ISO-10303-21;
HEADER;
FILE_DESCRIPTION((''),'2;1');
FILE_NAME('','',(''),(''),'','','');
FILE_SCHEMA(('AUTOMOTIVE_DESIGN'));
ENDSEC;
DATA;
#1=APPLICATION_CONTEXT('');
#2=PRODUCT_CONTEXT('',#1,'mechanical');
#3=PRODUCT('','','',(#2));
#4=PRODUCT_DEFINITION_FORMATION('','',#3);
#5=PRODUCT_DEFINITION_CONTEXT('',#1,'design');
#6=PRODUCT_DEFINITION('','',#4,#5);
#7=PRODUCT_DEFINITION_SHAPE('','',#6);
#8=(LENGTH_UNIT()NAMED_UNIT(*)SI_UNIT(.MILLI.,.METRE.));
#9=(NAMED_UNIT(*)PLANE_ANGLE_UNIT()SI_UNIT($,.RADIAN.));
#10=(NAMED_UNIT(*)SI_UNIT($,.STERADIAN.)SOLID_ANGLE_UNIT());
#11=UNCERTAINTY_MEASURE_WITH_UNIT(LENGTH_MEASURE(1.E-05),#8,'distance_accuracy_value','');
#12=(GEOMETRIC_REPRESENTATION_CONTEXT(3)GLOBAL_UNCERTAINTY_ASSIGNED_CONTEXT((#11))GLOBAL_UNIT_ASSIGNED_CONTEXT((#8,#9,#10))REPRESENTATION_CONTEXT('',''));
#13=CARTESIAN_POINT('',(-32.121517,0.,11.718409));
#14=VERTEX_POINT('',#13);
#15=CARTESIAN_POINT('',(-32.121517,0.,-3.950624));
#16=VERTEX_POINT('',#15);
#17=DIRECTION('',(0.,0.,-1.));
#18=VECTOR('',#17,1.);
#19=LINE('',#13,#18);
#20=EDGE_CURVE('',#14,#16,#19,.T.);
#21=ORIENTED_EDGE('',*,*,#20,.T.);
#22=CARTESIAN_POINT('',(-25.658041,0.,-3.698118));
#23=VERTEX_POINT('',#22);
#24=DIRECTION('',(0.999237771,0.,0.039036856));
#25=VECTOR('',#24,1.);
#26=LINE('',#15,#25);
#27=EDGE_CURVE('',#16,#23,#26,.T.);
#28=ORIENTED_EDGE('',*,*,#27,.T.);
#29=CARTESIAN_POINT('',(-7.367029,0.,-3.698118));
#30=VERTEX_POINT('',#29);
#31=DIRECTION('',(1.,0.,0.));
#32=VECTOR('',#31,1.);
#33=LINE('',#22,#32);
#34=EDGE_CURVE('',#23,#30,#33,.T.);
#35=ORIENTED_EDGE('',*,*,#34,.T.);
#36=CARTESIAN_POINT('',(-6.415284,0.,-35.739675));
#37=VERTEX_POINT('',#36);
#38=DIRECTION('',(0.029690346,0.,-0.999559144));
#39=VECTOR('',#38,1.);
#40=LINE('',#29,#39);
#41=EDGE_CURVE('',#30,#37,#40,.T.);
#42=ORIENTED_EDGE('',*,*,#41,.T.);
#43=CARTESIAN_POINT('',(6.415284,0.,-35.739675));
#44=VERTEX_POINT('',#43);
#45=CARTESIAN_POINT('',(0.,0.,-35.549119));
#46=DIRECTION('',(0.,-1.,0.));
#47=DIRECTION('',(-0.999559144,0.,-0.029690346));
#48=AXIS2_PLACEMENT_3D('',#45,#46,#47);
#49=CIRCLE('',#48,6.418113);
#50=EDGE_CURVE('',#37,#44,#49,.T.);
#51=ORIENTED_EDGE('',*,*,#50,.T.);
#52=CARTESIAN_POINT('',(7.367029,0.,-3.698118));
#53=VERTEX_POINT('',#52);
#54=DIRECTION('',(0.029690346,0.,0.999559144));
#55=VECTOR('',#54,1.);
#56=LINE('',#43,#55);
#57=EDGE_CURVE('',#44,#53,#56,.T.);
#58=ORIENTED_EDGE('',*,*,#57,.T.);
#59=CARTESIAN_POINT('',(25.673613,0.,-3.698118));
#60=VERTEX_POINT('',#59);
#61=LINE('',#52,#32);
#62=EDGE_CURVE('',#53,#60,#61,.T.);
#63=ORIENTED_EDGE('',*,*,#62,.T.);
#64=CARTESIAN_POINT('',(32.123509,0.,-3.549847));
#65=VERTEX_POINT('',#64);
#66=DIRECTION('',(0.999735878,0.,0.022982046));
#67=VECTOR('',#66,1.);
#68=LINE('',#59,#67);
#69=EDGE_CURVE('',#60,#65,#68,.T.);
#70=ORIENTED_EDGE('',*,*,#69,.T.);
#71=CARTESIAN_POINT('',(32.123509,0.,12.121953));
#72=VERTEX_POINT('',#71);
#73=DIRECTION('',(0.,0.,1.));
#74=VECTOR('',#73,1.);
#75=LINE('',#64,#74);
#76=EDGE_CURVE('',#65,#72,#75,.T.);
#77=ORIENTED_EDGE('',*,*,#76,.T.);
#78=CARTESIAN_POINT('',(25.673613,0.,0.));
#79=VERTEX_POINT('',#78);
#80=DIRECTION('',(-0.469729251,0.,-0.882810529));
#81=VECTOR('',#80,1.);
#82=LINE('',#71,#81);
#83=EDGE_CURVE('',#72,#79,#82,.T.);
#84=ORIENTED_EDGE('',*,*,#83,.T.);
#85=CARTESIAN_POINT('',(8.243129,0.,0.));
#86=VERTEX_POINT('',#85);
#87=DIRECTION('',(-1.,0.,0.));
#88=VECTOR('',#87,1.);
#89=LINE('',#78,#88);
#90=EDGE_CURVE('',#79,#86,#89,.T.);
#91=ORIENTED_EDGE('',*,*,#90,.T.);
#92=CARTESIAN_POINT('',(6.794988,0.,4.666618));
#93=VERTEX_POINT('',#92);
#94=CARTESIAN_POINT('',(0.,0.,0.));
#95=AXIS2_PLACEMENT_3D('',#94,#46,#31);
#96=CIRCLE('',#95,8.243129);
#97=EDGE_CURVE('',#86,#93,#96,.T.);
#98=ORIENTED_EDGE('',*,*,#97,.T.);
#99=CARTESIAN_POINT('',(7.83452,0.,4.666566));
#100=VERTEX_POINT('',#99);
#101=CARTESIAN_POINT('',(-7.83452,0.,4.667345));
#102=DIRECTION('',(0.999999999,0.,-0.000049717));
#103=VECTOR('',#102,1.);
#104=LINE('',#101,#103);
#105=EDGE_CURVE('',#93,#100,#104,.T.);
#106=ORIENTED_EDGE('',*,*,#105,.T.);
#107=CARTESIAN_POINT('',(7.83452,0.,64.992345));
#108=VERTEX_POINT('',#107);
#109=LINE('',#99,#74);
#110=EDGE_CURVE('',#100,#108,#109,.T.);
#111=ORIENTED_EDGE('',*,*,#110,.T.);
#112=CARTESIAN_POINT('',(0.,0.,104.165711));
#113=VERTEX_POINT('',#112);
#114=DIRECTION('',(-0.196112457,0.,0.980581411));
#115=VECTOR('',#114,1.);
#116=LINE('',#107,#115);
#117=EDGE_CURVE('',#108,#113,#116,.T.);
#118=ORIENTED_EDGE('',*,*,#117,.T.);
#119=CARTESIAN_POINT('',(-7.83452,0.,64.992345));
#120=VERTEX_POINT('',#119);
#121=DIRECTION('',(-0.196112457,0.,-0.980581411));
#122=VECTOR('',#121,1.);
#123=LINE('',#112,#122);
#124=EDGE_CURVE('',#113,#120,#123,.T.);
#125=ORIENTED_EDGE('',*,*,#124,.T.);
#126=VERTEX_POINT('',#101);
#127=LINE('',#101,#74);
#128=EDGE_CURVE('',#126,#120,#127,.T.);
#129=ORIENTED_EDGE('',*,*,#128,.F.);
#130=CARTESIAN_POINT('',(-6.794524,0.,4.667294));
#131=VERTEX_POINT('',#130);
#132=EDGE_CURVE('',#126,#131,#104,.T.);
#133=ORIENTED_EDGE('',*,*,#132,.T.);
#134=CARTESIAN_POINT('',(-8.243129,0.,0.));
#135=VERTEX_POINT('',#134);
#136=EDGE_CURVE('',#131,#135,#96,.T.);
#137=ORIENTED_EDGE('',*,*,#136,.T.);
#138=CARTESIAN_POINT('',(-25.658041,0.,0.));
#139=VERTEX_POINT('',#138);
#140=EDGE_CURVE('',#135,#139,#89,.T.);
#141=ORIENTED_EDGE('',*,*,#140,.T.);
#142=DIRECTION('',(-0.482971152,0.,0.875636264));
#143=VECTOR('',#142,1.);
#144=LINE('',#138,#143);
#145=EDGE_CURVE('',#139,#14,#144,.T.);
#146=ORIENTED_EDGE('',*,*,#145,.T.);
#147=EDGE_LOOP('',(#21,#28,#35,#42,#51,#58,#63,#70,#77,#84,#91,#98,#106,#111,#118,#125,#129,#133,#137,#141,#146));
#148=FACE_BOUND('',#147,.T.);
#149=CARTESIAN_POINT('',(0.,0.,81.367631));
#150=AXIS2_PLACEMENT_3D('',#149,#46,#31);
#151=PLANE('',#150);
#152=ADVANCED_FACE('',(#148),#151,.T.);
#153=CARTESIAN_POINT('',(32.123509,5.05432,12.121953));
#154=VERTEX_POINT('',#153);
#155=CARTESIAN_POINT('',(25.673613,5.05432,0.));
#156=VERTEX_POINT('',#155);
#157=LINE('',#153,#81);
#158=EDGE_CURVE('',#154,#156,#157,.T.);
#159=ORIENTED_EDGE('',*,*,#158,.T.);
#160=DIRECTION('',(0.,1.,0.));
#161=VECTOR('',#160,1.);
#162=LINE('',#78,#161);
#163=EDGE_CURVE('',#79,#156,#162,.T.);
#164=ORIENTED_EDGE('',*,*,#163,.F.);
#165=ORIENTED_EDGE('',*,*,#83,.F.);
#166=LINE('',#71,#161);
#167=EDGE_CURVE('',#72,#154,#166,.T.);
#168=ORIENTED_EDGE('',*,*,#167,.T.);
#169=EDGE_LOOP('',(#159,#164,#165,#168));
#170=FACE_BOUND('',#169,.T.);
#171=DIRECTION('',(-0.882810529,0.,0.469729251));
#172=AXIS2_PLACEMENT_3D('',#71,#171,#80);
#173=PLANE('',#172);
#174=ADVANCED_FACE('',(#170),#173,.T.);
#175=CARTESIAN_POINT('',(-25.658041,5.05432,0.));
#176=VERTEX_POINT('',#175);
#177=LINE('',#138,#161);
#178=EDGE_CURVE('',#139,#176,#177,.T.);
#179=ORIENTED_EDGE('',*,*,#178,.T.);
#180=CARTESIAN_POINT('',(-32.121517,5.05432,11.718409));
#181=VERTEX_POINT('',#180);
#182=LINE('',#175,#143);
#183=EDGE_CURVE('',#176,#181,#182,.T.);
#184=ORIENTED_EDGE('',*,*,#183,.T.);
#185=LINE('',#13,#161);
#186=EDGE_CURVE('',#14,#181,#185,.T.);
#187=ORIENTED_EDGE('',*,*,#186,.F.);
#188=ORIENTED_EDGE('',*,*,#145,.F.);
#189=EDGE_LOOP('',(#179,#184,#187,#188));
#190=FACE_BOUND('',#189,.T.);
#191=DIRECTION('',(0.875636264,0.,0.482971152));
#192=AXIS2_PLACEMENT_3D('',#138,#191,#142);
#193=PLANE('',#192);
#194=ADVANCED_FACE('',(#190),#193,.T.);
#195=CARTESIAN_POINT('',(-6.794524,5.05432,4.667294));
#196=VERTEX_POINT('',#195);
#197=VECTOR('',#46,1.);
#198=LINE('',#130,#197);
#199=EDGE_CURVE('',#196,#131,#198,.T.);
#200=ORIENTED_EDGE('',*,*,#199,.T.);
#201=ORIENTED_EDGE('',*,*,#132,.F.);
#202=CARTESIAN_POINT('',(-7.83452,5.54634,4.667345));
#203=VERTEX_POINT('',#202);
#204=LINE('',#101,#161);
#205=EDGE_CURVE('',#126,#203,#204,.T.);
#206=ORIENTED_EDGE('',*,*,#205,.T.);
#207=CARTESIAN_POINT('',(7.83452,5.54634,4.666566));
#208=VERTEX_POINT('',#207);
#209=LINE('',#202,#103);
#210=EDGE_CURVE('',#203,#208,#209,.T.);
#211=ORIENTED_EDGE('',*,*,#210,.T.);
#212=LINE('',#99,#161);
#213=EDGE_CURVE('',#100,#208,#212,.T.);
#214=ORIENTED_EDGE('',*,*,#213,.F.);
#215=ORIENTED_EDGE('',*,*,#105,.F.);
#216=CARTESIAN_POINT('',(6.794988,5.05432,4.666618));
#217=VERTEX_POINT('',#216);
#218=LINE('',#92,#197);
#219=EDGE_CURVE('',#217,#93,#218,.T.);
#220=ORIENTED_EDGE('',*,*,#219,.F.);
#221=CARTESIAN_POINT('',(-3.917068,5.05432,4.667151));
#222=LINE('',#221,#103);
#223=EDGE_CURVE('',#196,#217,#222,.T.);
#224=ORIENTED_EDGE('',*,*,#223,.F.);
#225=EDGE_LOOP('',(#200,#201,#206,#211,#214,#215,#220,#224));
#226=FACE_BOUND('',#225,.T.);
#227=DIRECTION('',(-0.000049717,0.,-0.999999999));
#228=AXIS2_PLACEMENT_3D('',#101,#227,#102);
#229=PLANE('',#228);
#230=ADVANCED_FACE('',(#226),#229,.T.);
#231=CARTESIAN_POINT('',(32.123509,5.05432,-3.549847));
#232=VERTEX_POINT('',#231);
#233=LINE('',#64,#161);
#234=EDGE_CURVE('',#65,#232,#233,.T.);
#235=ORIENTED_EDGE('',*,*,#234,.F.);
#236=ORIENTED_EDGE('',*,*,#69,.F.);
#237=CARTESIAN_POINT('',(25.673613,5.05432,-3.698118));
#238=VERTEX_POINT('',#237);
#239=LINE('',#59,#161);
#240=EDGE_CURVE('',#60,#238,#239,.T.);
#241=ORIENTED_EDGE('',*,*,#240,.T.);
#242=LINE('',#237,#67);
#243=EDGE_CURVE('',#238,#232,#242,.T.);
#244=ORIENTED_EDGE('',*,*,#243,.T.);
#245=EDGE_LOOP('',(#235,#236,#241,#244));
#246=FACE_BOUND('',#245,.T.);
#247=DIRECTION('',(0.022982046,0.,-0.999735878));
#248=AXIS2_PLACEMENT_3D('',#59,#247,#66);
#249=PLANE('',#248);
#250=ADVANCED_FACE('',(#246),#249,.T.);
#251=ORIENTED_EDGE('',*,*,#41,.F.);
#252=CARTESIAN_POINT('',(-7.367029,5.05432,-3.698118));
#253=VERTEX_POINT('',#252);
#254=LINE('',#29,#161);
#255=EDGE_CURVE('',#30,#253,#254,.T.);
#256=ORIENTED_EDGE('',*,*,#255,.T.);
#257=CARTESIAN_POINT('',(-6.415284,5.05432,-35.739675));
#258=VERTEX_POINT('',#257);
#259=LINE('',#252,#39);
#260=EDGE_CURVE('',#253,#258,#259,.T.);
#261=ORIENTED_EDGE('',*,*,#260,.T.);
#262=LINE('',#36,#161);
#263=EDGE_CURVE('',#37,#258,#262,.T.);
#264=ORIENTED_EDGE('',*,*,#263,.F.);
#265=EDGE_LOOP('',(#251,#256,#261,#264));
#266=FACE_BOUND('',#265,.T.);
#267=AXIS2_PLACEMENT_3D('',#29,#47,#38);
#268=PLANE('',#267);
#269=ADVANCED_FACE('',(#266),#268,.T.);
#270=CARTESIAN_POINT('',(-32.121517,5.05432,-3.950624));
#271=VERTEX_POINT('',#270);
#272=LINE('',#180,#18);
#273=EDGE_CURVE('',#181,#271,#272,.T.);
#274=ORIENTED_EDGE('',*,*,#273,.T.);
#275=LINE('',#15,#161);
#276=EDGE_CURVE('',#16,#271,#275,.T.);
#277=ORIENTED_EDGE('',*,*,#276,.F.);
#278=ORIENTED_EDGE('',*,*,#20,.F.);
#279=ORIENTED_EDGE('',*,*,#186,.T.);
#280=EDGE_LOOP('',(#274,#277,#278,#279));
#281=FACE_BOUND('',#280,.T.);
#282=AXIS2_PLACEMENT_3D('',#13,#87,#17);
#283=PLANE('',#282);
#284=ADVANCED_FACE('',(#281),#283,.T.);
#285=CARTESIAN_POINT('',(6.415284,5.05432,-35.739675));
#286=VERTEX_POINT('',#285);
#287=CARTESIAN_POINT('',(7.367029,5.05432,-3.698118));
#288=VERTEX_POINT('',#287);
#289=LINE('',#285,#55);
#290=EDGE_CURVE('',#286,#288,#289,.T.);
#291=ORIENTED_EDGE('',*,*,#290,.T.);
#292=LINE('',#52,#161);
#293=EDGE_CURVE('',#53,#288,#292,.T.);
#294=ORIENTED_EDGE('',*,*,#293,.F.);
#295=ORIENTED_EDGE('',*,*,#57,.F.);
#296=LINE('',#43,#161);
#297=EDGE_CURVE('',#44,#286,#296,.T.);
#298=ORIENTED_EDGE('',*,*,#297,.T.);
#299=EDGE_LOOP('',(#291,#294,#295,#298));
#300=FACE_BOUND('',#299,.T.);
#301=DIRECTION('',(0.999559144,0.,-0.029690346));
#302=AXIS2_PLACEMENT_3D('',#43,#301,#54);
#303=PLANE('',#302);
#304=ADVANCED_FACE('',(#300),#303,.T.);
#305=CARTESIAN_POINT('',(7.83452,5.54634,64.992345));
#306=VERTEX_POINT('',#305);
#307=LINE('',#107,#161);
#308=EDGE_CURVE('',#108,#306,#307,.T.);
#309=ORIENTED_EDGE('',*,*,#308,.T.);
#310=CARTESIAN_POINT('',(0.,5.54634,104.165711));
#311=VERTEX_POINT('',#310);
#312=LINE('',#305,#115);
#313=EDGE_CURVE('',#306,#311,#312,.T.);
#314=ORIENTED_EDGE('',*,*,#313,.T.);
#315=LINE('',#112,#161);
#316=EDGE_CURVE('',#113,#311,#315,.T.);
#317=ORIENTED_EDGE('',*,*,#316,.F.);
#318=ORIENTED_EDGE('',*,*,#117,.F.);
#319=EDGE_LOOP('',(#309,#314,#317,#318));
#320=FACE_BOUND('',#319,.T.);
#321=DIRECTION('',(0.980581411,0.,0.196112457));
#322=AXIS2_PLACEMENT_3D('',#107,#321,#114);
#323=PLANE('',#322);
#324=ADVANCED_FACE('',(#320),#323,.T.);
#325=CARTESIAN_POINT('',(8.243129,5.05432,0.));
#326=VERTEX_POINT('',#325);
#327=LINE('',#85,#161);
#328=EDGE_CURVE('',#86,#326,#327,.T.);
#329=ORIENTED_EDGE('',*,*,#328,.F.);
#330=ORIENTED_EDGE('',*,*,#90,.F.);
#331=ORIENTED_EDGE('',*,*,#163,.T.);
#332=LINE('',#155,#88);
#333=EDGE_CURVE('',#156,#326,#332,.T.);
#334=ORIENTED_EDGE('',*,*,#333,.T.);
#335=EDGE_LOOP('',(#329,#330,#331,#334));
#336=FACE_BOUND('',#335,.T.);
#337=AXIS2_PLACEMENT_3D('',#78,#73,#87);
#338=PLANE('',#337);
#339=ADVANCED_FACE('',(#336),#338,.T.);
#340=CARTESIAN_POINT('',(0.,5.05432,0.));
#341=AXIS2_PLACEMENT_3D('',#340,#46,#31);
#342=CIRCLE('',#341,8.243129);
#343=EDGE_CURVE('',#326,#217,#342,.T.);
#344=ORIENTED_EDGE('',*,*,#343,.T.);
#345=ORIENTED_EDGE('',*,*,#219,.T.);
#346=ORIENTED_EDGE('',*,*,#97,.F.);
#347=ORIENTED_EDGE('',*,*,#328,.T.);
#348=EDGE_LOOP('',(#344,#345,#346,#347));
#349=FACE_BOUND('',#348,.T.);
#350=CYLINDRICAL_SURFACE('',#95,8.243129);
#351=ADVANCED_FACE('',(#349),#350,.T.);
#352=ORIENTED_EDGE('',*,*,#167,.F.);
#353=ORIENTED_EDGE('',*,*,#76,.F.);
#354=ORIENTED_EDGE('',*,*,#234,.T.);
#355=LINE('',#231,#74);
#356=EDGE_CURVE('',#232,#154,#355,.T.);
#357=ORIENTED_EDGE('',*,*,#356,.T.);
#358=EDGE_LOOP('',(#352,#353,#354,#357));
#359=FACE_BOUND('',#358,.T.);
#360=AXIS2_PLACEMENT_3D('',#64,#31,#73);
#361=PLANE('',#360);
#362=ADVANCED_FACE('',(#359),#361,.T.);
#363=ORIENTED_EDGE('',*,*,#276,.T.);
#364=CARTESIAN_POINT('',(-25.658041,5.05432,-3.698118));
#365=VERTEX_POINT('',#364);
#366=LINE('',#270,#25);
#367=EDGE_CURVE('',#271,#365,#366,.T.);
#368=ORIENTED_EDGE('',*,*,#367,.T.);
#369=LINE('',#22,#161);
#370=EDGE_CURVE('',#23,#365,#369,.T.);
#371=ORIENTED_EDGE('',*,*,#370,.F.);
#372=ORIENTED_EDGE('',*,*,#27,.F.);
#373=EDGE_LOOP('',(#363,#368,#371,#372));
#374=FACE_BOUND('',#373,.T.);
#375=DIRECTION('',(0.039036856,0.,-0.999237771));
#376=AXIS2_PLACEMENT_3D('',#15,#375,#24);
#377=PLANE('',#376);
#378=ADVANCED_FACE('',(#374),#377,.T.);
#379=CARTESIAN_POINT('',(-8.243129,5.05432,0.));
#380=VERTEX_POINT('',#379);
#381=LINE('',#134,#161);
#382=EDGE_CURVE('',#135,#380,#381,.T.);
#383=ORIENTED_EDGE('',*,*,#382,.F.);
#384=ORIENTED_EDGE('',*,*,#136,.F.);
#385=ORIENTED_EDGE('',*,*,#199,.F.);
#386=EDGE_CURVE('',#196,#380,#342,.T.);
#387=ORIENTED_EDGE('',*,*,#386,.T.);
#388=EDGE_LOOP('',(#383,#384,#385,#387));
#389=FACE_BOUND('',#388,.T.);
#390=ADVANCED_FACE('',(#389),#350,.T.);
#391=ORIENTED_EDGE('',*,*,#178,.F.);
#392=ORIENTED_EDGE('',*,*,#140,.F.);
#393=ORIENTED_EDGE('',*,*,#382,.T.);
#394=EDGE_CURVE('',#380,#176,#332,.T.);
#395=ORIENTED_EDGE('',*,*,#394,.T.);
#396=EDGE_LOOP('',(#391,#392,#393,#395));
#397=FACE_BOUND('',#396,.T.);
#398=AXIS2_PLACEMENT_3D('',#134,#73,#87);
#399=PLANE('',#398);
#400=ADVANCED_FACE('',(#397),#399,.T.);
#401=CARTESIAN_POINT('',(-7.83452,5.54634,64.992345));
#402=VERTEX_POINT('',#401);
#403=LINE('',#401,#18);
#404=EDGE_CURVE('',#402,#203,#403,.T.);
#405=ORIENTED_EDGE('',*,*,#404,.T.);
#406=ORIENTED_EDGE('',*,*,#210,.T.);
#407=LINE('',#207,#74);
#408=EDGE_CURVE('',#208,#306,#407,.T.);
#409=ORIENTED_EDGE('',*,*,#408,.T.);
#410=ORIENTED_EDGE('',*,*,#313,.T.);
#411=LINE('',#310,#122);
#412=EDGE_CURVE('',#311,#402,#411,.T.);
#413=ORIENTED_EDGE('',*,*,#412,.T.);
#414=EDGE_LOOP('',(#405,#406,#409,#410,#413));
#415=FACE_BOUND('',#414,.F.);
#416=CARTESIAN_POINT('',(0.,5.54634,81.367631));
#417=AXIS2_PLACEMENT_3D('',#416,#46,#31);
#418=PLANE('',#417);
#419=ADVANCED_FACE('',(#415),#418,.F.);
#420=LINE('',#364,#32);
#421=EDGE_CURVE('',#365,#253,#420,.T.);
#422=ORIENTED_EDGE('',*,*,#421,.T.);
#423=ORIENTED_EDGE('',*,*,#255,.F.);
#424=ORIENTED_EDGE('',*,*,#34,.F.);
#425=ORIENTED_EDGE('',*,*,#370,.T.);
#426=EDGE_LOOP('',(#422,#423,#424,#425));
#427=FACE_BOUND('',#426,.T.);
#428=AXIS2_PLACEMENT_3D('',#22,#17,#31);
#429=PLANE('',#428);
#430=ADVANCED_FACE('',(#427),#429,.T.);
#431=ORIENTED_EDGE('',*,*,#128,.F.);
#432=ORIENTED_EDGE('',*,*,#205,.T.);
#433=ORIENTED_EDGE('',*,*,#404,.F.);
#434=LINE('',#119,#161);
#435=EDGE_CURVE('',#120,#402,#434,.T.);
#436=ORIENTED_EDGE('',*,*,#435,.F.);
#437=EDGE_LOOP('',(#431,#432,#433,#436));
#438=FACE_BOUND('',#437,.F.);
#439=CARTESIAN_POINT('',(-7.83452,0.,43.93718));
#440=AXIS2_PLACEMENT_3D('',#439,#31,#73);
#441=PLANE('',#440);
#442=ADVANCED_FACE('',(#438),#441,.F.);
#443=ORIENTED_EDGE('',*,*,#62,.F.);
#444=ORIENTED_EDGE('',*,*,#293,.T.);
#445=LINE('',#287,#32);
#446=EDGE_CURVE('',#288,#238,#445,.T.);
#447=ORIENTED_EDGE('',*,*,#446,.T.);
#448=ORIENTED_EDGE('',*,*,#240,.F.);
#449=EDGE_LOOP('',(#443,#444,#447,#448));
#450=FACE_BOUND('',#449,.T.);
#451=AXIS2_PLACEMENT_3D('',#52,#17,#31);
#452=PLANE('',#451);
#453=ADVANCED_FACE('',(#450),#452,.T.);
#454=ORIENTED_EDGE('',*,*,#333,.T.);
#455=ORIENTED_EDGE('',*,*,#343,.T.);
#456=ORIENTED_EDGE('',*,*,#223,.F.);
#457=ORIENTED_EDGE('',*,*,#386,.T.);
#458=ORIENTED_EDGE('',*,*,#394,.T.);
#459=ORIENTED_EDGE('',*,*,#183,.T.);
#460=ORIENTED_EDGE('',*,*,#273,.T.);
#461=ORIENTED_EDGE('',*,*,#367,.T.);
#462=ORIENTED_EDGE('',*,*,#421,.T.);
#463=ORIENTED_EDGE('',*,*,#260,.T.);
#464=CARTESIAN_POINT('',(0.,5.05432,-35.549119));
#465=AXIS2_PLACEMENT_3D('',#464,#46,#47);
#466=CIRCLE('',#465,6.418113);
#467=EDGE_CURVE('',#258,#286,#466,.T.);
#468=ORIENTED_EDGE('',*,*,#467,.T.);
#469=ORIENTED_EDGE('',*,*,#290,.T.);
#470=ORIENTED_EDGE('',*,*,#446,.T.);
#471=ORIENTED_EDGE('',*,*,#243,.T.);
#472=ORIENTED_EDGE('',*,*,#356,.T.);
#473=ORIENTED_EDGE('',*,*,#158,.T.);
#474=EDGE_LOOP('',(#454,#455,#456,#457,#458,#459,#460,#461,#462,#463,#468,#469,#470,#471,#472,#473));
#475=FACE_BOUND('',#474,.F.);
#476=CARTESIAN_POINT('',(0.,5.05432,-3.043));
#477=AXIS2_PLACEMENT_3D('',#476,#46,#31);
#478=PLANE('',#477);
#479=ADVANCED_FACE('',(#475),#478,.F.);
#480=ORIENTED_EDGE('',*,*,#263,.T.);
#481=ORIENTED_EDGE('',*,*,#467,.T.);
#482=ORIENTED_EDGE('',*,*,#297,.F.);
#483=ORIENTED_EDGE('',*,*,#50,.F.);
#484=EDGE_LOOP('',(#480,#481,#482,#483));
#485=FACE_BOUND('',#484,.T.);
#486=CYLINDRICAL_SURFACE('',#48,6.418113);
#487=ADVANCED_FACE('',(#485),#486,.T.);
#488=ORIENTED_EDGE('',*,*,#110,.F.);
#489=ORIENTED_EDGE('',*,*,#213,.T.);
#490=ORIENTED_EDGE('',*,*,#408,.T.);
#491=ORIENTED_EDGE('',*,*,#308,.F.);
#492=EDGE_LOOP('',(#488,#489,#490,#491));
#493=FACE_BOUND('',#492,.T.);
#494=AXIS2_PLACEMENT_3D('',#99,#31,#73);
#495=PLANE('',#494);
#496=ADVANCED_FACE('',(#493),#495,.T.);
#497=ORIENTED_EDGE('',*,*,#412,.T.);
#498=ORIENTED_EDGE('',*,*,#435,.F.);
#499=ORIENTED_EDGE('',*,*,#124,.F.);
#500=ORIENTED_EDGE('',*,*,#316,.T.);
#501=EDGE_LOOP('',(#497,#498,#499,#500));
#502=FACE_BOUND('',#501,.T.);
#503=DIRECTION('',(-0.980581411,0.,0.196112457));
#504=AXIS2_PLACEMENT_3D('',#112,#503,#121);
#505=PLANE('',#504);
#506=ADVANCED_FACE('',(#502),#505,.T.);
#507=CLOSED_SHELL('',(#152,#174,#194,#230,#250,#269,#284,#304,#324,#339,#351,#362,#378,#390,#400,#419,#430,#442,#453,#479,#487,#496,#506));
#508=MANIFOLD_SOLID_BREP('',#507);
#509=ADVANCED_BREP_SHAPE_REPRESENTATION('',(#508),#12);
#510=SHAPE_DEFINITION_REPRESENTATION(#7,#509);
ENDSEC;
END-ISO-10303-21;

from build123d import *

# Parameters (mm, degrees)
F1_DEPTH = 5.05432
F2_W     = 15.6690403819
F2_H     = 21.0551657914
F3_DEPTH = 5.54634


# Not quite as in the source:
# - a feature names something its author has since deleted; it is built from what else it names


with BuildPart() as f1:
    # F0 (on Front) → F1 (new body)
    with BuildSketch(Plane.XZ):
        with BuildLine():
            ThreePointArc((-8.2431294521, 0), (-8.0211144228, -1.9002385587), (-7.3670285487, -3.6981175654))
            ThreePointArc((-7.3670285487, -3.6981175654), (0, -8.2431294521), (7.3670285487, -3.6981175654))
            ThreePointArc((7.3670285487, -3.6981175654), (8.0211144228, -1.9002385587), (8.2431294521, 0))
            Line((8.2431294521, 0), (0, 0))
            Line((0, 0), (-8.2431294521, 0))
        make_face()
        with BuildLine():
            Line((-25.6580412388, -3.6981175654), (-7.3670285487, -3.6981175654))
            ThreePointArc((-7.3670285487, -3.6981175654), (-8.0211144228, -1.9002385587), (-8.2431294521, 0))
            Line((-8.2431294521, 0), (-25.6580412388, 0))
            Line((-25.6580412388, 0), (-25.6580412388, -3.6981175654))
        make_face()
        with BuildLine():
            ThreePointArc((7.3670285487, -3.6981175654), (0, -8.2431294521), (-7.3670285487, -3.6981175654))
            Line((-7.3670285487, -3.6981175654), (-6.4152840294, -35.7396751265))
            ThreePointArc((-6.4152840294, -35.7396751265), (-0.0952885085, -29.131713029), (6.41811349, -35.5491191149))
            ThreePointArc((6.41811349, -35.5491191149), (6.4174060859, -35.6444076234), (6.4152840294, -35.7396751265))
            Line((6.4152840294, -35.7396751265), (7.3670285487, -3.6981175654))
        make_face()
        with BuildLine():
            ThreePointArc((8.2431294521, 0), (8.0211144228, -1.9002385587), (7.3670285487, -3.6981175654))
            Line((7.3670285487, -3.6981175654), (25.6736125353, -3.6981175654))
            Line((25.6736125353, -3.6981175654), (25.6736125353, 0))
            Line((25.6736125353, 0), (8.2431294521, 0))
        make_face()
        with BuildLine():
            ThreePointArc((8.2431294521, 0), (0, 8.2431294521), (-8.2431294521, 0))
            Line((-8.2431294521, 0), (0, 0))
            Line((0, 0), (8.2431294521, 0))
        make_face()
        Polygon((-32.1215167642, -3.9506237954), (-25.6580412388, -3.6981175654), (-25.6580412388, 0), (-32.1215167642, 11.7184091359), align=None)
        with BuildLine():
            ThreePointArc((6.41811349, -35.5491191149), (-0.0952885085, -29.131713029), (-6.4152840294, -35.7396751265))
            ThreePointArc((-6.4152840294, -35.7396751265), (0, -41.9672326049), (6.4152840294, -35.7396751265))
            ThreePointArc((6.4152840294, -35.7396751265), (6.4174060859, -35.6444076234), (6.41811349, -35.5491191149))
        make_face()
        Polygon((25.6736125353, 0), (25.6736125353, -3.6981175654), (32.1235085251, -3.5498465956), (32.1235085251, 12.1219534044), align=None)
    extrude(amount=-F1_DEPTH)

    # F2 (on Front) → F3 (join)
    with BuildSketch(Plane.XZ):
        Polygon((-7.834520191, 64.9923454344), (7.834520191, 64.9923454344), (0, 104.1657105088), align=None)
        with Locations((0, 54.4647625387)):
            Rectangle(F2_W, F2_H)
        Polygon((7.834520191, 4.6665664136), (7.834520191, 26.9957184792), (0, 26.9957184792), (-7.834520191, 26.9957184792), (-7.834520191, 4.6673454344), align=None)
        Polygon((7.834520191, 26.9957184792), (7.834520191, 43.937179643), (-7.834520191, 43.937179643), (-7.834520191, 26.9957184792), (0, 26.9957184792), align=None)
    extrude(amount=-F3_DEPTH)


solid = f1.part
